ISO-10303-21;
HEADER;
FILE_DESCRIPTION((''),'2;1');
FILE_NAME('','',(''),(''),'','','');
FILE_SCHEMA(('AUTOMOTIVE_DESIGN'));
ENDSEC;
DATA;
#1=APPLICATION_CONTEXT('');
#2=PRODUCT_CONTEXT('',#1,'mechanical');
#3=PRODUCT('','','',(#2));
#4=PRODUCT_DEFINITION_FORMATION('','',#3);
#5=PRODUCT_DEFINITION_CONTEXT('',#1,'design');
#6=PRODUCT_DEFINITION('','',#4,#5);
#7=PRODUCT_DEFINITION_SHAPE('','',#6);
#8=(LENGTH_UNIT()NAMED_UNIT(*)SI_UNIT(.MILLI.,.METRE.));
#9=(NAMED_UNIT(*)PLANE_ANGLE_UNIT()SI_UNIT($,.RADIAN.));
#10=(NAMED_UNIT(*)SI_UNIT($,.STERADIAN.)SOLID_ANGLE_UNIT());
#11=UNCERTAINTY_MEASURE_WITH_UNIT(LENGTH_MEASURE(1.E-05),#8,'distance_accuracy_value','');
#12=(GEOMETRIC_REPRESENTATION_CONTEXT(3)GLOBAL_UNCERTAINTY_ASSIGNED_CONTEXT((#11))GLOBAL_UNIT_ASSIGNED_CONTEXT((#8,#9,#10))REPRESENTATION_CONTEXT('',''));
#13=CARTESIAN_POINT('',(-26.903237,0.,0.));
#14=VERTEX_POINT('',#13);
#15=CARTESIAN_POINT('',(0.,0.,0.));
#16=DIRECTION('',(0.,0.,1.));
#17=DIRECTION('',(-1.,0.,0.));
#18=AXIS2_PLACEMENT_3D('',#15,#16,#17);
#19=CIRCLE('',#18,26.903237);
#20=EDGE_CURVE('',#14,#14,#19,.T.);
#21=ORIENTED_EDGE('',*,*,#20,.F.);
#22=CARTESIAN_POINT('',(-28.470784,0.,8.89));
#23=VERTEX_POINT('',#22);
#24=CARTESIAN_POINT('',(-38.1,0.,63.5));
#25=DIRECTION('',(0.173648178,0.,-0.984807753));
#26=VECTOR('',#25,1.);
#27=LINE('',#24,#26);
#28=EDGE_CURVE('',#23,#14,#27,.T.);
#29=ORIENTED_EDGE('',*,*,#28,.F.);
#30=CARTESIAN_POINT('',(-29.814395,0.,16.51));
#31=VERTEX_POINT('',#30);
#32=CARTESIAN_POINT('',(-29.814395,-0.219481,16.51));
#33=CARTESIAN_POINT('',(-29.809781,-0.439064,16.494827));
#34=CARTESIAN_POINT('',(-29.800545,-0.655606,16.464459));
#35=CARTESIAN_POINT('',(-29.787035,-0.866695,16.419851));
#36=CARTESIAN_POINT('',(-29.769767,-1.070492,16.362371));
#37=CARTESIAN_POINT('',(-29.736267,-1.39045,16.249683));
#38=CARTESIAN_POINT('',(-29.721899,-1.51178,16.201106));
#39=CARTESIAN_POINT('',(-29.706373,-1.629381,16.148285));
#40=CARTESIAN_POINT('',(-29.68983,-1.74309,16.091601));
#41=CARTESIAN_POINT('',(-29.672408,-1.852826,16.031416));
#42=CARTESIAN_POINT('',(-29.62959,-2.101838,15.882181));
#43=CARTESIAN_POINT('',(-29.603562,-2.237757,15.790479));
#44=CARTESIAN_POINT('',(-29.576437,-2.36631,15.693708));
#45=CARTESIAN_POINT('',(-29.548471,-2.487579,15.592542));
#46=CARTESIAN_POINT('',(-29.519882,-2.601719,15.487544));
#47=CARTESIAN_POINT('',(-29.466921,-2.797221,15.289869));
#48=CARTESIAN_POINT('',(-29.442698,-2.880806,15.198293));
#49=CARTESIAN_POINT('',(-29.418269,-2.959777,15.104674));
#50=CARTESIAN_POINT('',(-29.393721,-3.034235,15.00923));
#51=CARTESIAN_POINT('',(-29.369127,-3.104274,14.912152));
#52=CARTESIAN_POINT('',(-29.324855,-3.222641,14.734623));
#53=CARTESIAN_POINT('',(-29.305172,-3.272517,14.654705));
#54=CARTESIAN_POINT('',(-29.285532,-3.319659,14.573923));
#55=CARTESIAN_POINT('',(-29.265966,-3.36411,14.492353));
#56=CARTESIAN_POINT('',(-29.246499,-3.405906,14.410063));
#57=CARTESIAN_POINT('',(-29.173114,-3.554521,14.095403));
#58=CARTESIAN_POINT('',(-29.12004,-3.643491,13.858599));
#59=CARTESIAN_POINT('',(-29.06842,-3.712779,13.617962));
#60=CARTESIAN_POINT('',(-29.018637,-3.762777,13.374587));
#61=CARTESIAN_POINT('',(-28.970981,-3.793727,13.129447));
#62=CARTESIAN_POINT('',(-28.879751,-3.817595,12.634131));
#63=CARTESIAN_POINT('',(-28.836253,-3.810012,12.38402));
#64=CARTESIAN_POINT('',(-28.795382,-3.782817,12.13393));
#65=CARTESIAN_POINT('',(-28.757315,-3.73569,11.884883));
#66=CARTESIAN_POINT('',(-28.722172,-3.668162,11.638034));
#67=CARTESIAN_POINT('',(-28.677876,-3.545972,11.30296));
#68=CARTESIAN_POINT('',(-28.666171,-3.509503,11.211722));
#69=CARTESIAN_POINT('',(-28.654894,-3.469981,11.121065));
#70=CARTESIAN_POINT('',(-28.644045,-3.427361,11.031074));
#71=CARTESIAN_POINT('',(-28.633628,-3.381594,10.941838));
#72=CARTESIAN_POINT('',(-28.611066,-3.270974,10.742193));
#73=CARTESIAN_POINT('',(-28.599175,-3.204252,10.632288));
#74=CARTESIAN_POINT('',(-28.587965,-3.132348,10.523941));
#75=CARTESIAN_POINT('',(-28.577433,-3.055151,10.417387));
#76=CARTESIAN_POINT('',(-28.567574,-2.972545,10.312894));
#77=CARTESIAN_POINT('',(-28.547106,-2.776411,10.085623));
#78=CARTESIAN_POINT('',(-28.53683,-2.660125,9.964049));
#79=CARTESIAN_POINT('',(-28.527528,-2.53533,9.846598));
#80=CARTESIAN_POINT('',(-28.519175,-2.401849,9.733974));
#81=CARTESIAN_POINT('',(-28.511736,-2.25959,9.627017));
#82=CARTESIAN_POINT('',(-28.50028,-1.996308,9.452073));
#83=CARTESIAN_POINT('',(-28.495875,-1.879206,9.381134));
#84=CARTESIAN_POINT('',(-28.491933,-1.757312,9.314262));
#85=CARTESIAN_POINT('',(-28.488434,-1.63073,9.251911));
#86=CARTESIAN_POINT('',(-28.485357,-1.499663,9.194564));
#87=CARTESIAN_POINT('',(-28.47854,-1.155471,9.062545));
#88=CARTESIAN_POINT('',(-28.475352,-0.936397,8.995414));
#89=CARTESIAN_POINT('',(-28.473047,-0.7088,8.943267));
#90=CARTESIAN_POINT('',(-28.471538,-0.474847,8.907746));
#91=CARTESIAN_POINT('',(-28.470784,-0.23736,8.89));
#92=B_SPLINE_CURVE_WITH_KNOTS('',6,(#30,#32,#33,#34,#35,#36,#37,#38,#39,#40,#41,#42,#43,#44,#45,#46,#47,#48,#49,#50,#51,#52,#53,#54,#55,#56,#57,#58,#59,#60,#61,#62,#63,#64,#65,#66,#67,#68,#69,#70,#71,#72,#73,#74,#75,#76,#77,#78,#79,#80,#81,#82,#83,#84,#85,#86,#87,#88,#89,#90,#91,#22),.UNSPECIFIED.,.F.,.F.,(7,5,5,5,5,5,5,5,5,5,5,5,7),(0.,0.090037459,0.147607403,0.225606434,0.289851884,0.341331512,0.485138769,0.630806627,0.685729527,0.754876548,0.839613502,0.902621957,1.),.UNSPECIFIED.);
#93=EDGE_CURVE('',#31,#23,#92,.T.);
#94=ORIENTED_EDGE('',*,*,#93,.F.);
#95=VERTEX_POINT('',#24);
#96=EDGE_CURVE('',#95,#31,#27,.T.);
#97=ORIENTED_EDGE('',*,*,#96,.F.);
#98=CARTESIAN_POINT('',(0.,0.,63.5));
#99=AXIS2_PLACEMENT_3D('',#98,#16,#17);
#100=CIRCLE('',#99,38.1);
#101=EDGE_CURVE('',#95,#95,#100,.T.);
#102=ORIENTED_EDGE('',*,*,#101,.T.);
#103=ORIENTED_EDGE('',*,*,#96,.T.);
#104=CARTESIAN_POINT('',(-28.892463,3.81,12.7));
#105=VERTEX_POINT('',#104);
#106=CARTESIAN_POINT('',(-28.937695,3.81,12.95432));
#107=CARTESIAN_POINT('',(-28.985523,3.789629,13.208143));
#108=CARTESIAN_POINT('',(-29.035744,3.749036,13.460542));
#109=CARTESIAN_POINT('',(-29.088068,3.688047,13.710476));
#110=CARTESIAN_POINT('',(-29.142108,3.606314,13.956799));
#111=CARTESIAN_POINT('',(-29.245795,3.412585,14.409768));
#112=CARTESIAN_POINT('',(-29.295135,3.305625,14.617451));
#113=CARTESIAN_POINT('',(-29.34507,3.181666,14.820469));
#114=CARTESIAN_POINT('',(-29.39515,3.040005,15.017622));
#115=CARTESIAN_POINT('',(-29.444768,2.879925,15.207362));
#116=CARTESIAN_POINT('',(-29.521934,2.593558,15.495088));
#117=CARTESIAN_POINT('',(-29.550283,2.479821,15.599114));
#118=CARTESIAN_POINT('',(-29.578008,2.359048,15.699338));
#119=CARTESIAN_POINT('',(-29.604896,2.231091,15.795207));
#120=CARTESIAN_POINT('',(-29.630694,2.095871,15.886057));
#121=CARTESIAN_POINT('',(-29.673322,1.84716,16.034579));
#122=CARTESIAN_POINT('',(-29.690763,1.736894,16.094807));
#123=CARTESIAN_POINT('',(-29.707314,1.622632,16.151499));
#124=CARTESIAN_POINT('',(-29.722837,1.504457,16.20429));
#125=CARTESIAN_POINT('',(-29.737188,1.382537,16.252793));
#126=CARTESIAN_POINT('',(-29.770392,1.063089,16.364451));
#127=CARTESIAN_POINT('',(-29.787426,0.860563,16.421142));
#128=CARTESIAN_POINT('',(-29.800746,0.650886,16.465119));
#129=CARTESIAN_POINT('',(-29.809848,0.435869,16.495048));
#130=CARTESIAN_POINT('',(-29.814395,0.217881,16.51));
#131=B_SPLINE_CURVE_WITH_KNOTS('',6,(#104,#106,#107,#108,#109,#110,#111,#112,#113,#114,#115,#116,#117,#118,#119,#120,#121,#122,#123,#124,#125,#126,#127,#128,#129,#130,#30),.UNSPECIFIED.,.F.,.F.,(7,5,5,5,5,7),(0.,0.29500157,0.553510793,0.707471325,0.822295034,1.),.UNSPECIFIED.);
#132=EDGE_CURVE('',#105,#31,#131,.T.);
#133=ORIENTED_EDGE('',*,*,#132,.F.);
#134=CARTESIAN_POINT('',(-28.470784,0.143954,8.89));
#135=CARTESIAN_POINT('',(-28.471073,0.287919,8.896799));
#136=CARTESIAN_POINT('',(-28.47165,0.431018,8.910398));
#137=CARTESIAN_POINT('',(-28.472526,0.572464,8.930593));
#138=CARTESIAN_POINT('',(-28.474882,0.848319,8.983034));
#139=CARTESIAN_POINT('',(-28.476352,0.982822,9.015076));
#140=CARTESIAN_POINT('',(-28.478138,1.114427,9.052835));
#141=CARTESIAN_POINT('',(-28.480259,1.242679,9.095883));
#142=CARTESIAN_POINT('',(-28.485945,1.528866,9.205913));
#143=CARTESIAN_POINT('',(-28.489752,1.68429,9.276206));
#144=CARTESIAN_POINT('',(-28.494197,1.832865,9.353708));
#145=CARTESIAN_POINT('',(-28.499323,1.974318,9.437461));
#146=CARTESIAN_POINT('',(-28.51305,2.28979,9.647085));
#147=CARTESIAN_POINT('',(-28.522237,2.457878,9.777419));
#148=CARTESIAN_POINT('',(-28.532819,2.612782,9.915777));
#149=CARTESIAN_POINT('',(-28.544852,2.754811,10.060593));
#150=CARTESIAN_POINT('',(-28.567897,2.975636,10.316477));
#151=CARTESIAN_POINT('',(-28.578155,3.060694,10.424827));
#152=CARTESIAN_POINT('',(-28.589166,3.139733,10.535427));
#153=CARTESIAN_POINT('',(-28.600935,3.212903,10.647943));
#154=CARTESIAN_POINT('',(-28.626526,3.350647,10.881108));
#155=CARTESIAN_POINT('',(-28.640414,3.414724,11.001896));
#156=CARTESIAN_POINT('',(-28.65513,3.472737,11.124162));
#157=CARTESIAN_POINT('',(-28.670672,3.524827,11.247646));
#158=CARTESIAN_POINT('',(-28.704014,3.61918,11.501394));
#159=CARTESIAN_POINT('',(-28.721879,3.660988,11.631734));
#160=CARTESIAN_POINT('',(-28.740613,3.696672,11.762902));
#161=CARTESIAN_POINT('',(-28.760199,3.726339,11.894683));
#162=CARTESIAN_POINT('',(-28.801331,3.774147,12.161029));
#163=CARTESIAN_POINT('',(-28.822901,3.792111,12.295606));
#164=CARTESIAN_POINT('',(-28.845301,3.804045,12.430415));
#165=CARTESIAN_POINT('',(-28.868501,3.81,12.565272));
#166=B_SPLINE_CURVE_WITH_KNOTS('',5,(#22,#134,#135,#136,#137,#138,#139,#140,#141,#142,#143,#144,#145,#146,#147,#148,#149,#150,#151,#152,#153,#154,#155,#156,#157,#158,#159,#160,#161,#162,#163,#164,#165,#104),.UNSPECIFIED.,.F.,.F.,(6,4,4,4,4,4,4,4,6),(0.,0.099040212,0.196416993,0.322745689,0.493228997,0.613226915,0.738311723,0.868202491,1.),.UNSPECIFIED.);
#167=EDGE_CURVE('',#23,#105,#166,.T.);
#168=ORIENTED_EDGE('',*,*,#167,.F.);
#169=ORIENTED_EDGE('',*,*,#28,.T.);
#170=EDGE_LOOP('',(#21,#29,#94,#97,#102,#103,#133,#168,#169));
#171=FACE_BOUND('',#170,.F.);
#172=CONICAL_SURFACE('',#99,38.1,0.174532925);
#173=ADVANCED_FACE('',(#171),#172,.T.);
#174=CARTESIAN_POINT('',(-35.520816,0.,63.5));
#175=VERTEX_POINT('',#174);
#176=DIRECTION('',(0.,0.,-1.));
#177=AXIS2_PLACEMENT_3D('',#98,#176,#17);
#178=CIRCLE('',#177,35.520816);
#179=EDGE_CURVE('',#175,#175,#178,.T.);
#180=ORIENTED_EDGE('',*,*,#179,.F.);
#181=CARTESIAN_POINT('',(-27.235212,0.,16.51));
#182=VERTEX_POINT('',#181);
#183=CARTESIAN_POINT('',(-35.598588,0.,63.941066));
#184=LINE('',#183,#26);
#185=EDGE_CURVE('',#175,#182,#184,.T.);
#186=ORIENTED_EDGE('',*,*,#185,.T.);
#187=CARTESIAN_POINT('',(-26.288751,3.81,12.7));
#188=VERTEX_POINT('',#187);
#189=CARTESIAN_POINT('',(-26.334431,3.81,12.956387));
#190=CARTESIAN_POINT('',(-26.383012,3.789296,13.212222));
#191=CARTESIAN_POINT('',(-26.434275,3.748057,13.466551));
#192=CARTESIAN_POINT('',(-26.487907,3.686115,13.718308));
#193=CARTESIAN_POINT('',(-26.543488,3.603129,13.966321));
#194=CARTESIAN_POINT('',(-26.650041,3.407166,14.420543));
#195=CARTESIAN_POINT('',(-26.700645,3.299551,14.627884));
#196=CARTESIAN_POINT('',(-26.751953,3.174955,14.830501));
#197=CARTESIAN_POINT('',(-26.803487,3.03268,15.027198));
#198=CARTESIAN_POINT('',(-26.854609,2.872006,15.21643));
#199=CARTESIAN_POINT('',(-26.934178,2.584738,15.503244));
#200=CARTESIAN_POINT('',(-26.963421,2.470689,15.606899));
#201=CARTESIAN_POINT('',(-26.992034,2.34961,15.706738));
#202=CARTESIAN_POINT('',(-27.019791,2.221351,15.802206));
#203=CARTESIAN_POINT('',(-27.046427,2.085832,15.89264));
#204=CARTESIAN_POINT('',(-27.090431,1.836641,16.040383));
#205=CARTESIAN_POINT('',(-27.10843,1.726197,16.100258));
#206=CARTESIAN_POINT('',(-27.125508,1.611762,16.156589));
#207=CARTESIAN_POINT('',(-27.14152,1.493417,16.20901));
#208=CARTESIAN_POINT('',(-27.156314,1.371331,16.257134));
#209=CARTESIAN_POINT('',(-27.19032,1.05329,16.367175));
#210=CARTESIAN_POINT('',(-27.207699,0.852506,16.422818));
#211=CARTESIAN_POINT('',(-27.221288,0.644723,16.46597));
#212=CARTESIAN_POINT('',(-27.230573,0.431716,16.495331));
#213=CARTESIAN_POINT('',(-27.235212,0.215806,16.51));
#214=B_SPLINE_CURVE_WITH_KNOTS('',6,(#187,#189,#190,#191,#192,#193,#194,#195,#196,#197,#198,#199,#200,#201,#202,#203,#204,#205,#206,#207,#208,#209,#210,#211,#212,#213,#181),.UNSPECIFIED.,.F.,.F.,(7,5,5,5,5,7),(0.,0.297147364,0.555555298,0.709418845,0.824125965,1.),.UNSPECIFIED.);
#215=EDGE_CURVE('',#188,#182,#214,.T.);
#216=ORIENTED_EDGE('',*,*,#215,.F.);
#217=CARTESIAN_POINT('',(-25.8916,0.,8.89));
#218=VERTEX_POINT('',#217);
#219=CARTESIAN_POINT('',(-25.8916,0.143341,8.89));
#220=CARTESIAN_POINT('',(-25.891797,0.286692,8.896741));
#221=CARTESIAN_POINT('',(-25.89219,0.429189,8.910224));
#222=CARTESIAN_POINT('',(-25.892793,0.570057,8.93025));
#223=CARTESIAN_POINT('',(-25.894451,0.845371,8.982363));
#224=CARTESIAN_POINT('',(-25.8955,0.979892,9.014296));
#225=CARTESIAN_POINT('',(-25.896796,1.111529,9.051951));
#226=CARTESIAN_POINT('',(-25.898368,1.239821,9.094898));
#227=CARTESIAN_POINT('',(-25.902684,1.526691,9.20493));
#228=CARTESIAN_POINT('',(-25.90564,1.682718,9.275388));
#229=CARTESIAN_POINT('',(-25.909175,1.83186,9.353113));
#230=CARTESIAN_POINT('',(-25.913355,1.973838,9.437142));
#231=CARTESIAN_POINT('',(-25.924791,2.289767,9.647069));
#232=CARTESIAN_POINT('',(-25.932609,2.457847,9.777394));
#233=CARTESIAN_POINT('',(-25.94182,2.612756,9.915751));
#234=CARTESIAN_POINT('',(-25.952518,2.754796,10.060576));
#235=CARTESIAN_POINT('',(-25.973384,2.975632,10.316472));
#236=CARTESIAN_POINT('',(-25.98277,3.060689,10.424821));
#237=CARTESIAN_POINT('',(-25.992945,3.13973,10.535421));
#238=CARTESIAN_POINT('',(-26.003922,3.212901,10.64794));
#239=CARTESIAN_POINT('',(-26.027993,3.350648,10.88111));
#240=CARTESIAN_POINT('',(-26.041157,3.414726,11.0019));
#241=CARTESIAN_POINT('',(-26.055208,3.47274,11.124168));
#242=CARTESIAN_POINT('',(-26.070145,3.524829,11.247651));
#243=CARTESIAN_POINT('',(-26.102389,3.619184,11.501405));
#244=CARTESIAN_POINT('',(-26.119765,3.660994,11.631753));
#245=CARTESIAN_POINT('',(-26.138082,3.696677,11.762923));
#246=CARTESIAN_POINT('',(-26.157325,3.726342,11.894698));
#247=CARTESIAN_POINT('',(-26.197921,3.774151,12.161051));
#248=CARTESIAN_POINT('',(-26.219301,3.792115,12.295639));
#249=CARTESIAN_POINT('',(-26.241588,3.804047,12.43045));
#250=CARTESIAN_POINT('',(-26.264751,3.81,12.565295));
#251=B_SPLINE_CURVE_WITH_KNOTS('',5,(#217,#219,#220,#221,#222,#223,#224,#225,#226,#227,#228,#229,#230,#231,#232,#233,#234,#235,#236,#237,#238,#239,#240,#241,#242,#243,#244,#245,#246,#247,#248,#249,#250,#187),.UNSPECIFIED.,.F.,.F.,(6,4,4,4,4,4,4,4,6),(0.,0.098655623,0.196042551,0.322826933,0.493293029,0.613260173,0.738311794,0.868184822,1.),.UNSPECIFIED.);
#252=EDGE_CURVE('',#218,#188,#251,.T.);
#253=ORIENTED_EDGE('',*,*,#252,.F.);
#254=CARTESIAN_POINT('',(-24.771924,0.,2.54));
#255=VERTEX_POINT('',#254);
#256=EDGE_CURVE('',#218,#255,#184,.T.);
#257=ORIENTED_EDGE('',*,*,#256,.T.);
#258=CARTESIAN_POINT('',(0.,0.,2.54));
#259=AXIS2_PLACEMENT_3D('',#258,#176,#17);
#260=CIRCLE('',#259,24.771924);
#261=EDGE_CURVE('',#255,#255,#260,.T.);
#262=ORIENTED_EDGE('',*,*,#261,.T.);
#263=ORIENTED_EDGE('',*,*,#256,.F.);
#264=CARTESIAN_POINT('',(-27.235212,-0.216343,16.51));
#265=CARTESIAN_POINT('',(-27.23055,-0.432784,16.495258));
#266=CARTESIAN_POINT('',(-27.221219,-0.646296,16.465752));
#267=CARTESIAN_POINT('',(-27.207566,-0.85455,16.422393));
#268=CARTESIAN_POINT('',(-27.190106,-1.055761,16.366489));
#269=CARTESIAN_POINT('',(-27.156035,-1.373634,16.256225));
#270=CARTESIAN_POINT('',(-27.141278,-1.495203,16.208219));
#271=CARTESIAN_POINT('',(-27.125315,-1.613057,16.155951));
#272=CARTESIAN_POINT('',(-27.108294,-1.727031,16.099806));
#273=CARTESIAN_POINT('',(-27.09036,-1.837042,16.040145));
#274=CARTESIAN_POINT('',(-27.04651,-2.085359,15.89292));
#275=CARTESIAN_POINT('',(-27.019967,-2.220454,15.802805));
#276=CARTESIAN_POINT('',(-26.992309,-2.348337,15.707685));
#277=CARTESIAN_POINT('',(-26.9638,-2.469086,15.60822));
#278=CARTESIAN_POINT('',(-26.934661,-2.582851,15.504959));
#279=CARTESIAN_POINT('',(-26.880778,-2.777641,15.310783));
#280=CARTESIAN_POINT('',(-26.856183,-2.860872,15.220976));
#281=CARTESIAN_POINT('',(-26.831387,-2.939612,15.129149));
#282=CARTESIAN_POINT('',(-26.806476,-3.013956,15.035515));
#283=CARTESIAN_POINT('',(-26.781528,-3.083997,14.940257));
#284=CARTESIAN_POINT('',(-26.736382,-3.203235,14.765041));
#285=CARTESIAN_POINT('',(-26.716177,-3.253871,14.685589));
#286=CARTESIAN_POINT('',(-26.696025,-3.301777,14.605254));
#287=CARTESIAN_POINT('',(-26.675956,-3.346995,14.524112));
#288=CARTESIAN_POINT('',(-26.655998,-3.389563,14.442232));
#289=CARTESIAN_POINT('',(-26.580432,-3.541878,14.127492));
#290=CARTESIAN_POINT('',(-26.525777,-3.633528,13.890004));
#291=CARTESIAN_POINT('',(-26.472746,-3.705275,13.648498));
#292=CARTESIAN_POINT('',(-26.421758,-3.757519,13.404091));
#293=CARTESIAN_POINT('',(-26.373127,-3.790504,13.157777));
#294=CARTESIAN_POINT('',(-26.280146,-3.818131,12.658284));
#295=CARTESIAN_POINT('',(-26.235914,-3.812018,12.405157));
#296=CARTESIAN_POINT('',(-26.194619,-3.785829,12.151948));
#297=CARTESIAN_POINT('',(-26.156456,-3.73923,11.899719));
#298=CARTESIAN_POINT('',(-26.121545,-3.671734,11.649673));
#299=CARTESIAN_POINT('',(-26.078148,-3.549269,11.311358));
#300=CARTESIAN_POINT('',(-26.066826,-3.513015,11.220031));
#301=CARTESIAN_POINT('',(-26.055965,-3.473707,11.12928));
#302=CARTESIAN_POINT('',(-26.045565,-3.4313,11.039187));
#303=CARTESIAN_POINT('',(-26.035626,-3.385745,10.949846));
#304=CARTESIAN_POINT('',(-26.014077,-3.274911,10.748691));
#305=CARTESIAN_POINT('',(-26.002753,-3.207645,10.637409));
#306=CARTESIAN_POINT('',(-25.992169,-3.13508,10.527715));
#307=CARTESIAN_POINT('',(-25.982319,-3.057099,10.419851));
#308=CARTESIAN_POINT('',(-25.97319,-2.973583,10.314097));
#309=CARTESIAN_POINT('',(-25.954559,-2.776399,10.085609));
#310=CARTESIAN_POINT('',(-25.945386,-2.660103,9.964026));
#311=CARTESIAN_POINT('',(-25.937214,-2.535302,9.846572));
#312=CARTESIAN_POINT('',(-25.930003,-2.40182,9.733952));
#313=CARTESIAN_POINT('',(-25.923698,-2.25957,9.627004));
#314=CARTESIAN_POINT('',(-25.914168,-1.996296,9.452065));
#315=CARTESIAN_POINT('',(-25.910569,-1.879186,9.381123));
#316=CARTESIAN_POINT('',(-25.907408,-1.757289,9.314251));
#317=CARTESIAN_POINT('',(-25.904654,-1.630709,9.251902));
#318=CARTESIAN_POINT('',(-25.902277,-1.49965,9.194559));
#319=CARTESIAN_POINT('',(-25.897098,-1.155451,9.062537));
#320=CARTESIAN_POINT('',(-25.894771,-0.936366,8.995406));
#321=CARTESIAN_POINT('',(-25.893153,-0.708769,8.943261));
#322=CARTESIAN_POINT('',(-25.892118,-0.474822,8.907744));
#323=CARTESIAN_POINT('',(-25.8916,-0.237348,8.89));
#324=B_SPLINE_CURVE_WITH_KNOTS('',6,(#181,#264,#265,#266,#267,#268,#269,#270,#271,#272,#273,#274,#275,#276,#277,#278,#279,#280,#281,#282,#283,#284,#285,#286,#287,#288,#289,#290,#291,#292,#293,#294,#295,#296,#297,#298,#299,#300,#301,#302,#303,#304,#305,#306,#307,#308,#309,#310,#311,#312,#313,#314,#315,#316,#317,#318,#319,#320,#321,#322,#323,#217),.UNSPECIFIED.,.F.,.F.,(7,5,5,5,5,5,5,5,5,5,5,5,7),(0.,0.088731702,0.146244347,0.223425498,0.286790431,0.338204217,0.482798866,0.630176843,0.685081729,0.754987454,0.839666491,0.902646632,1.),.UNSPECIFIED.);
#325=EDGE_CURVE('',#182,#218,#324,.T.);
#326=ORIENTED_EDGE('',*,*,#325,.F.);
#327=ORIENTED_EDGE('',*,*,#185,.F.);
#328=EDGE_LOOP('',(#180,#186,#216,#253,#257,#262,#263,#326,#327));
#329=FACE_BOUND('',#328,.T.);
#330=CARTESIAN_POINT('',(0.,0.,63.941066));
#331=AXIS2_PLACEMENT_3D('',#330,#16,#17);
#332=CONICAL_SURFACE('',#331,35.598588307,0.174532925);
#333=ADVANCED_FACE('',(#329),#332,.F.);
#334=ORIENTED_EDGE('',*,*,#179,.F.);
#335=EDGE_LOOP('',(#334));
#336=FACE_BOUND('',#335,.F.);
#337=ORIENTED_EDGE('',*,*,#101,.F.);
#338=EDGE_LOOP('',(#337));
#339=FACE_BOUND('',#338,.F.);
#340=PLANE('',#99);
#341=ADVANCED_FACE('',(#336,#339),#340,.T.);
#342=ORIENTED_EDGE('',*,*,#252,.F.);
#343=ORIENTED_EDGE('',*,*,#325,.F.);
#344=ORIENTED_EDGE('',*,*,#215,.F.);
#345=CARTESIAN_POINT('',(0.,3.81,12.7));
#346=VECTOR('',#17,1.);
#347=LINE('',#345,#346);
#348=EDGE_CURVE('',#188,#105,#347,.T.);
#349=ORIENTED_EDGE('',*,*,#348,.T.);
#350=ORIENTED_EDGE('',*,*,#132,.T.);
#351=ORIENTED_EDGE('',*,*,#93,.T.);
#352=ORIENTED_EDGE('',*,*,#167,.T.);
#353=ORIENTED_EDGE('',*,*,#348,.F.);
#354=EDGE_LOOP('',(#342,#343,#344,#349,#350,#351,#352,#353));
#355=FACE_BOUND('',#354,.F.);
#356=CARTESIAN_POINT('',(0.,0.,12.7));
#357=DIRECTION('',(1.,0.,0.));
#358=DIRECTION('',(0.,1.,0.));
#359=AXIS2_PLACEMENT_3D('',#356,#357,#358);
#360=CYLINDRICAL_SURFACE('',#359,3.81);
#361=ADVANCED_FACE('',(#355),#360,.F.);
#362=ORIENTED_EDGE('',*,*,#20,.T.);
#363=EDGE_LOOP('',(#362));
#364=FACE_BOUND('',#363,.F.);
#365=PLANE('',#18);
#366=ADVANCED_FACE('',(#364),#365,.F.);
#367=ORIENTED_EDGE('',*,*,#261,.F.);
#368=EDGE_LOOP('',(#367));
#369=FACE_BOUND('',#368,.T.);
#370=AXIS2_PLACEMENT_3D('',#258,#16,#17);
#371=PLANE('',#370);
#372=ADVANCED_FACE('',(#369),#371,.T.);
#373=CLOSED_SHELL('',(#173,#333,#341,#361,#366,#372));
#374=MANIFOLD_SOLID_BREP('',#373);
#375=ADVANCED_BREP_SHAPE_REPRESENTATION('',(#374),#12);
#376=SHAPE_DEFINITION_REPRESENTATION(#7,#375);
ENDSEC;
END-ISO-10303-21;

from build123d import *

# Parameters (mm, degrees)
F3_T     = -2.54
F5_D     = 7.62
F5_DEPTH = 38.101


# Not quite as in the source:
# - a feature of the source that left no trace in its solid (it failed there, or was rolled back) is left out


with BuildPart() as f1:
    # F0 (on Front) → F1 (revolve)
    with BuildSketch(Plane.XZ):
        Polygon((0, 0), (0, 63.5), (-38.1, 63.5), (-26.903236725, 0), align=None)
    revolve(axis=Axis((0, 0, 31.75), (0, 0, 1)))

    # F3
    f3_openings = [f1.faces().sort_by_distance(p)[0] for p in [
        (0, 0, 63.5),
    ]]
    offset(amount=F3_T, openings=f3_openings)

    # F5 (through all, one way)
    with BuildSketch(Plane.YZ):
        with Locations((0, 12.7)):
            Circle(F5_D / 2)
    extrude(amount=-F5_DEPTH, mode=Mode.SUBTRACT)


solid = f1.part
